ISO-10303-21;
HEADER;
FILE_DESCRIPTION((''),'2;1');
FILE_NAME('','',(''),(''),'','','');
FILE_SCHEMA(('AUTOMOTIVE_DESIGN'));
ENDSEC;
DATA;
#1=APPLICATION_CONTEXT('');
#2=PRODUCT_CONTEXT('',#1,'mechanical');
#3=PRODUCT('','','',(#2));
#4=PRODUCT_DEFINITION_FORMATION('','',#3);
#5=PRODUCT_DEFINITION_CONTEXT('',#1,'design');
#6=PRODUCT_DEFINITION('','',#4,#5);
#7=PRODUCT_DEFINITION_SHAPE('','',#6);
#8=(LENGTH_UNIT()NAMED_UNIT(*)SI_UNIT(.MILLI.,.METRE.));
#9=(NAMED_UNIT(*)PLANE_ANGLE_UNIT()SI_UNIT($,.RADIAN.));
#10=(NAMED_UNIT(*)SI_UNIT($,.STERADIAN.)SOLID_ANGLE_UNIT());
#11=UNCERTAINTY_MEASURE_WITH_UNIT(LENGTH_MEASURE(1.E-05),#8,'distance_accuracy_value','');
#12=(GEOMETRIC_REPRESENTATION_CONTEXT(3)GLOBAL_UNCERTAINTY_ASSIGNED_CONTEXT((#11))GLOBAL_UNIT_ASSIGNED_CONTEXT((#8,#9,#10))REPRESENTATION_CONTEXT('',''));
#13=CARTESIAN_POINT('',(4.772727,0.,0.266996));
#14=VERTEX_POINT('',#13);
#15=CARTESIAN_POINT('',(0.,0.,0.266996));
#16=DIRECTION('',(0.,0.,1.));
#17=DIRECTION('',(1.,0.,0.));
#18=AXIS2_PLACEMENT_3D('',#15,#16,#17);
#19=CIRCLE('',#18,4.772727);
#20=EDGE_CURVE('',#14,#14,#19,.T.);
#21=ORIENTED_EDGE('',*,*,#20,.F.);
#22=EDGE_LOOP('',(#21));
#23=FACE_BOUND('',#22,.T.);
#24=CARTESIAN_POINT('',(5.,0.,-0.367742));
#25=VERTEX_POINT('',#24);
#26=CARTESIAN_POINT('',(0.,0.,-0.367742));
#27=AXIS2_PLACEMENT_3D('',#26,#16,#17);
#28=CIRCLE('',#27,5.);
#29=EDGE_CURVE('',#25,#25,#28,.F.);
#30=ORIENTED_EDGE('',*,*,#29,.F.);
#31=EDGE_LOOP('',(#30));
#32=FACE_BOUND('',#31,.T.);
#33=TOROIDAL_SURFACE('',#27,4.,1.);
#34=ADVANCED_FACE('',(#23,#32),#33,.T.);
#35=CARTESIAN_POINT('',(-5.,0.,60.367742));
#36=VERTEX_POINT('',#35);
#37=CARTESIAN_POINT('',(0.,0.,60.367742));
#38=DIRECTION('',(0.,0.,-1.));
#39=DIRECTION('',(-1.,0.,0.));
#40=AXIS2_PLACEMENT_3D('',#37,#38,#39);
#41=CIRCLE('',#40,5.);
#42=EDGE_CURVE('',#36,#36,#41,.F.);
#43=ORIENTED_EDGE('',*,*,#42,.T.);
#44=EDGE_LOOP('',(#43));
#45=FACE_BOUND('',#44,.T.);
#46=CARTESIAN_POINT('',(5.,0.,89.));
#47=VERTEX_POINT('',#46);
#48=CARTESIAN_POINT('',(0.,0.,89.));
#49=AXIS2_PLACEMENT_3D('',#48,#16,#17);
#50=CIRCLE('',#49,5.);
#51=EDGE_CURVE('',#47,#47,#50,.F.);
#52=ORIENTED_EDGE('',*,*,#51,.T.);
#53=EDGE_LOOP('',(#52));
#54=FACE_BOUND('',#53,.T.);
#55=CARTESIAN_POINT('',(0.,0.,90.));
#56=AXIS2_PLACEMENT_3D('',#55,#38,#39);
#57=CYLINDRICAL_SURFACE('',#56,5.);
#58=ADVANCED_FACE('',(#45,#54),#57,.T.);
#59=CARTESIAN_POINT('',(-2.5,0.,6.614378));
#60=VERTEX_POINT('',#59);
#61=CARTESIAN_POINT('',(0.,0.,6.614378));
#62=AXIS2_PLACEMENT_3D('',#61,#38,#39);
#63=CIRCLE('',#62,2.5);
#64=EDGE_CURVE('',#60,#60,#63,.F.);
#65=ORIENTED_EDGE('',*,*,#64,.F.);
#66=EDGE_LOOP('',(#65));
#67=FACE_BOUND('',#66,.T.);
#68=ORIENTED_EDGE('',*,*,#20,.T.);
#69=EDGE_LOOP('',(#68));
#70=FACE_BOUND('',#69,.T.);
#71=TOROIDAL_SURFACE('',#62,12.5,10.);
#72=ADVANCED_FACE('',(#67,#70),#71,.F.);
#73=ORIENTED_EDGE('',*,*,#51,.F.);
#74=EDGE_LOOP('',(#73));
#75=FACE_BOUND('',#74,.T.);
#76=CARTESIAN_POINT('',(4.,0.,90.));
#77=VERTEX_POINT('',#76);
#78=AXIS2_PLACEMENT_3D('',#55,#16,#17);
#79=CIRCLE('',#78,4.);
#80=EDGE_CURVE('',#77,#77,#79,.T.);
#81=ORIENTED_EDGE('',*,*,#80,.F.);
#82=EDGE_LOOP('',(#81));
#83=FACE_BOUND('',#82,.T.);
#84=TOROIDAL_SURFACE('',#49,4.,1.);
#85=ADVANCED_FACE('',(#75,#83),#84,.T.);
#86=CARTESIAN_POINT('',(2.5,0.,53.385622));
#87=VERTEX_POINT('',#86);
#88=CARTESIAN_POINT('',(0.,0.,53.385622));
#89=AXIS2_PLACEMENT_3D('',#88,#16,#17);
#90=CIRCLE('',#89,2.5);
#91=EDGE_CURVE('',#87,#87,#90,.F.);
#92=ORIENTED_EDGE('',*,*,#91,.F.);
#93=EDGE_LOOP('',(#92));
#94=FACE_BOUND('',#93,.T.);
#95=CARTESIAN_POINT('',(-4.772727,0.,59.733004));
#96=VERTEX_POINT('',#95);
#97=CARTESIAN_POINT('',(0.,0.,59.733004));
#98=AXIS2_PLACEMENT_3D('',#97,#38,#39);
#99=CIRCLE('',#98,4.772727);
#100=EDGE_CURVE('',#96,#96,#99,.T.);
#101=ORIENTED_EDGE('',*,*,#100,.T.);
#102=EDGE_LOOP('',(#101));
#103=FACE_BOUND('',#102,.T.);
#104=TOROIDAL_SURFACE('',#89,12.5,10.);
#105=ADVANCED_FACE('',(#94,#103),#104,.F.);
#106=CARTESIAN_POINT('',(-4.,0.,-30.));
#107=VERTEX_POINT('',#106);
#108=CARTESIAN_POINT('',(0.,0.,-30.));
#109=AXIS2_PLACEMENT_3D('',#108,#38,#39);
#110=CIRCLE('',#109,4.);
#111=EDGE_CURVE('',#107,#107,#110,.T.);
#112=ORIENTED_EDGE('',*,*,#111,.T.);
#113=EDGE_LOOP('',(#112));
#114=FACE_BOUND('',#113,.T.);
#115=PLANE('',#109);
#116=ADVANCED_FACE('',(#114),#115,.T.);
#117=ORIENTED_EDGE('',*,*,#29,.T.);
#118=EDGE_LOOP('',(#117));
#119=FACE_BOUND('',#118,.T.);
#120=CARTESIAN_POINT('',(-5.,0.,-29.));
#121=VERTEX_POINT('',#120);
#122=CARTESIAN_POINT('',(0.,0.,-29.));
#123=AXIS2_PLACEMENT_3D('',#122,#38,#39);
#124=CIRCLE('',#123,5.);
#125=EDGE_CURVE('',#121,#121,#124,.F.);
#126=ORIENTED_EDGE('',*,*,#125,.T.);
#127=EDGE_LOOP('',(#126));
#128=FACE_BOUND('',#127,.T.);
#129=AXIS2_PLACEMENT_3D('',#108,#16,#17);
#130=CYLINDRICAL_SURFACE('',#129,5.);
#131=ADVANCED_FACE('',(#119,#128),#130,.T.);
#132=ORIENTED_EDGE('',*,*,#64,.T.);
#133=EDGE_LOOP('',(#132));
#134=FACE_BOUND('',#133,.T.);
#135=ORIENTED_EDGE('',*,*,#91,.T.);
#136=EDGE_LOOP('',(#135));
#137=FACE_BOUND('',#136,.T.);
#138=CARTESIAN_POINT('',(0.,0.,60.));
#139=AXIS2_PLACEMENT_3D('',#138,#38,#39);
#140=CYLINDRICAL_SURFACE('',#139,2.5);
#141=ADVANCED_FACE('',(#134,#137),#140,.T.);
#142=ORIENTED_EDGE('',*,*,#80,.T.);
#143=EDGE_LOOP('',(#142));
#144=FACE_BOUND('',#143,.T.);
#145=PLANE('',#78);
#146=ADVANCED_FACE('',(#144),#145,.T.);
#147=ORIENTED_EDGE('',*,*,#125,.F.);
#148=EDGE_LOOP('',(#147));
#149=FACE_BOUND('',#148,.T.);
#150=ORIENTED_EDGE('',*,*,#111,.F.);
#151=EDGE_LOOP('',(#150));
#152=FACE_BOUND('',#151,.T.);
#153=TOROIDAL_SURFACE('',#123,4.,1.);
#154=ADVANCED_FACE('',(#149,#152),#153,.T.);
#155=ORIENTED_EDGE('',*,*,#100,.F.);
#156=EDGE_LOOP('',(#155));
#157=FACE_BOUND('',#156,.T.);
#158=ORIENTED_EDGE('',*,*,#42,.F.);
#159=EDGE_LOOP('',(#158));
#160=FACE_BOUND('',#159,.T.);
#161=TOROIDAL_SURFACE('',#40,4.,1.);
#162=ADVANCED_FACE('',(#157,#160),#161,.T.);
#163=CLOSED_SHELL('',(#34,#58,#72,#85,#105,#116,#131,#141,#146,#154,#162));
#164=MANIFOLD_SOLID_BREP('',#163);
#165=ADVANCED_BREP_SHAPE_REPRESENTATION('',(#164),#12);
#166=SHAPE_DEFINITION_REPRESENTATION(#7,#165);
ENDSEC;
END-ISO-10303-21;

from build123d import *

# Parameters (mm, degrees)
SKETCH_1_R      = 2.5
EXTRUDE_1_DEPTH = 60
SKETCH_2_R      = 5
EXTRUDE_2_DEPTH = 30
EXTRUDE_START   = 30
SKETCH_3_R      = 5
EXTRUDE_3_DEPTH = 30
FILLET_2_R      = 10
FILLET_3_R      = 1
FILLET_4_R      = 1


with BuildPart() as part:
    # 草圖1 → 填料-伸長1 (new body)
    with BuildSketch(Plane.XY):
        Circle(SKETCH_1_R)
    extrude(amount=EXTRUDE_1_DEPTH)

    # 草圖2 → 填料-伸長2 (add)
    with BuildSketch(Plane.XY.offset(60)):
        Circle(SKETCH_2_R)
    extrude(amount=EXTRUDE_2_DEPTH)

    # 草圖3 → 填料-伸長3 (add)
    with BuildSketch(Plane(origin=(0, 0, 0), x_dir=(-1, 0, 0), z_dir=(0, 0, -1)).offset(EXTRUDE_START)):
        with Locations(Location((0, 0, 0), (0, 0, 180))):
            Circle(SKETCH_3_R)
    extrude(amount=-EXTRUDE_3_DEPTH)

    # 圓角2
    # the kernel refuses this fillet: 10 mm, written as the material it adds along each edge
    with BuildSketch(Plane(origin=(0, 0, 0), x_dir=(1, 0, 0), z_dir=(0, -1, 0))) as fillet_2_piece_1:
        with BuildLine():
            CenterArc((12.5, 6.614378278), FILLET_2_R, 180, 41.409622109)
            Line((2.5, 6.614378278), (2.3, 6.614378278))
            Line((2.3, 6.614378278), (2.3, 0))
            Line((2.3, 0), (2.5, -0.2))
            ThreePointArc((2.5, -0.2), (3.75, -0.2), (4.85, -0.132287566))
            Line((4.85, -0.132287566), (5, 0))
        make_face()
    revolve(axis=Axis((0, 0, 0), (0, 0, 1)))
    with BuildSketch(Plane(origin=(0, 0, 60), x_dir=(1, 0, 0), z_dir=(0, -1, 0))) as fillet_2_piece_2:
        with BuildLine():
            CenterArc((12.5, -6.614378278), FILLET_2_R, 138.590377891, 41.409622109)
            Line((5, 0), (4.85, 0.132287566))
            ThreePointArc((4.85, 0.132287566), (3.75, 0.2), (2.5, 0.2))
            Line((2.5, 0.2), (2.3, 0))
            Line((2.3, 0), (2.3, -6.614378278))
            Line((2.3, -6.614378278), (2.5, -6.614378278))
        make_face()
    revolve(axis=Axis((0, 0, 60), (0, 0, 1)))

    # 圓角3
    fillet_3_edges = [part.edges().sort_by_distance(p)[0] for p in [
        (-5, 0, -30),
        (-5, 0, 90),
    ]]
    fillet(fillet_3_edges, radius=FILLET_3_R)

    # 圓角4
    fillet_4_edges = [part.edges().sort_by_distance(p)[0] for p in [
        (-5, 0, 0),
        (-5, 0, 60),
    ]]
    fillet(fillet_4_edges, radius=FILLET_4_R)


solid = part.part
